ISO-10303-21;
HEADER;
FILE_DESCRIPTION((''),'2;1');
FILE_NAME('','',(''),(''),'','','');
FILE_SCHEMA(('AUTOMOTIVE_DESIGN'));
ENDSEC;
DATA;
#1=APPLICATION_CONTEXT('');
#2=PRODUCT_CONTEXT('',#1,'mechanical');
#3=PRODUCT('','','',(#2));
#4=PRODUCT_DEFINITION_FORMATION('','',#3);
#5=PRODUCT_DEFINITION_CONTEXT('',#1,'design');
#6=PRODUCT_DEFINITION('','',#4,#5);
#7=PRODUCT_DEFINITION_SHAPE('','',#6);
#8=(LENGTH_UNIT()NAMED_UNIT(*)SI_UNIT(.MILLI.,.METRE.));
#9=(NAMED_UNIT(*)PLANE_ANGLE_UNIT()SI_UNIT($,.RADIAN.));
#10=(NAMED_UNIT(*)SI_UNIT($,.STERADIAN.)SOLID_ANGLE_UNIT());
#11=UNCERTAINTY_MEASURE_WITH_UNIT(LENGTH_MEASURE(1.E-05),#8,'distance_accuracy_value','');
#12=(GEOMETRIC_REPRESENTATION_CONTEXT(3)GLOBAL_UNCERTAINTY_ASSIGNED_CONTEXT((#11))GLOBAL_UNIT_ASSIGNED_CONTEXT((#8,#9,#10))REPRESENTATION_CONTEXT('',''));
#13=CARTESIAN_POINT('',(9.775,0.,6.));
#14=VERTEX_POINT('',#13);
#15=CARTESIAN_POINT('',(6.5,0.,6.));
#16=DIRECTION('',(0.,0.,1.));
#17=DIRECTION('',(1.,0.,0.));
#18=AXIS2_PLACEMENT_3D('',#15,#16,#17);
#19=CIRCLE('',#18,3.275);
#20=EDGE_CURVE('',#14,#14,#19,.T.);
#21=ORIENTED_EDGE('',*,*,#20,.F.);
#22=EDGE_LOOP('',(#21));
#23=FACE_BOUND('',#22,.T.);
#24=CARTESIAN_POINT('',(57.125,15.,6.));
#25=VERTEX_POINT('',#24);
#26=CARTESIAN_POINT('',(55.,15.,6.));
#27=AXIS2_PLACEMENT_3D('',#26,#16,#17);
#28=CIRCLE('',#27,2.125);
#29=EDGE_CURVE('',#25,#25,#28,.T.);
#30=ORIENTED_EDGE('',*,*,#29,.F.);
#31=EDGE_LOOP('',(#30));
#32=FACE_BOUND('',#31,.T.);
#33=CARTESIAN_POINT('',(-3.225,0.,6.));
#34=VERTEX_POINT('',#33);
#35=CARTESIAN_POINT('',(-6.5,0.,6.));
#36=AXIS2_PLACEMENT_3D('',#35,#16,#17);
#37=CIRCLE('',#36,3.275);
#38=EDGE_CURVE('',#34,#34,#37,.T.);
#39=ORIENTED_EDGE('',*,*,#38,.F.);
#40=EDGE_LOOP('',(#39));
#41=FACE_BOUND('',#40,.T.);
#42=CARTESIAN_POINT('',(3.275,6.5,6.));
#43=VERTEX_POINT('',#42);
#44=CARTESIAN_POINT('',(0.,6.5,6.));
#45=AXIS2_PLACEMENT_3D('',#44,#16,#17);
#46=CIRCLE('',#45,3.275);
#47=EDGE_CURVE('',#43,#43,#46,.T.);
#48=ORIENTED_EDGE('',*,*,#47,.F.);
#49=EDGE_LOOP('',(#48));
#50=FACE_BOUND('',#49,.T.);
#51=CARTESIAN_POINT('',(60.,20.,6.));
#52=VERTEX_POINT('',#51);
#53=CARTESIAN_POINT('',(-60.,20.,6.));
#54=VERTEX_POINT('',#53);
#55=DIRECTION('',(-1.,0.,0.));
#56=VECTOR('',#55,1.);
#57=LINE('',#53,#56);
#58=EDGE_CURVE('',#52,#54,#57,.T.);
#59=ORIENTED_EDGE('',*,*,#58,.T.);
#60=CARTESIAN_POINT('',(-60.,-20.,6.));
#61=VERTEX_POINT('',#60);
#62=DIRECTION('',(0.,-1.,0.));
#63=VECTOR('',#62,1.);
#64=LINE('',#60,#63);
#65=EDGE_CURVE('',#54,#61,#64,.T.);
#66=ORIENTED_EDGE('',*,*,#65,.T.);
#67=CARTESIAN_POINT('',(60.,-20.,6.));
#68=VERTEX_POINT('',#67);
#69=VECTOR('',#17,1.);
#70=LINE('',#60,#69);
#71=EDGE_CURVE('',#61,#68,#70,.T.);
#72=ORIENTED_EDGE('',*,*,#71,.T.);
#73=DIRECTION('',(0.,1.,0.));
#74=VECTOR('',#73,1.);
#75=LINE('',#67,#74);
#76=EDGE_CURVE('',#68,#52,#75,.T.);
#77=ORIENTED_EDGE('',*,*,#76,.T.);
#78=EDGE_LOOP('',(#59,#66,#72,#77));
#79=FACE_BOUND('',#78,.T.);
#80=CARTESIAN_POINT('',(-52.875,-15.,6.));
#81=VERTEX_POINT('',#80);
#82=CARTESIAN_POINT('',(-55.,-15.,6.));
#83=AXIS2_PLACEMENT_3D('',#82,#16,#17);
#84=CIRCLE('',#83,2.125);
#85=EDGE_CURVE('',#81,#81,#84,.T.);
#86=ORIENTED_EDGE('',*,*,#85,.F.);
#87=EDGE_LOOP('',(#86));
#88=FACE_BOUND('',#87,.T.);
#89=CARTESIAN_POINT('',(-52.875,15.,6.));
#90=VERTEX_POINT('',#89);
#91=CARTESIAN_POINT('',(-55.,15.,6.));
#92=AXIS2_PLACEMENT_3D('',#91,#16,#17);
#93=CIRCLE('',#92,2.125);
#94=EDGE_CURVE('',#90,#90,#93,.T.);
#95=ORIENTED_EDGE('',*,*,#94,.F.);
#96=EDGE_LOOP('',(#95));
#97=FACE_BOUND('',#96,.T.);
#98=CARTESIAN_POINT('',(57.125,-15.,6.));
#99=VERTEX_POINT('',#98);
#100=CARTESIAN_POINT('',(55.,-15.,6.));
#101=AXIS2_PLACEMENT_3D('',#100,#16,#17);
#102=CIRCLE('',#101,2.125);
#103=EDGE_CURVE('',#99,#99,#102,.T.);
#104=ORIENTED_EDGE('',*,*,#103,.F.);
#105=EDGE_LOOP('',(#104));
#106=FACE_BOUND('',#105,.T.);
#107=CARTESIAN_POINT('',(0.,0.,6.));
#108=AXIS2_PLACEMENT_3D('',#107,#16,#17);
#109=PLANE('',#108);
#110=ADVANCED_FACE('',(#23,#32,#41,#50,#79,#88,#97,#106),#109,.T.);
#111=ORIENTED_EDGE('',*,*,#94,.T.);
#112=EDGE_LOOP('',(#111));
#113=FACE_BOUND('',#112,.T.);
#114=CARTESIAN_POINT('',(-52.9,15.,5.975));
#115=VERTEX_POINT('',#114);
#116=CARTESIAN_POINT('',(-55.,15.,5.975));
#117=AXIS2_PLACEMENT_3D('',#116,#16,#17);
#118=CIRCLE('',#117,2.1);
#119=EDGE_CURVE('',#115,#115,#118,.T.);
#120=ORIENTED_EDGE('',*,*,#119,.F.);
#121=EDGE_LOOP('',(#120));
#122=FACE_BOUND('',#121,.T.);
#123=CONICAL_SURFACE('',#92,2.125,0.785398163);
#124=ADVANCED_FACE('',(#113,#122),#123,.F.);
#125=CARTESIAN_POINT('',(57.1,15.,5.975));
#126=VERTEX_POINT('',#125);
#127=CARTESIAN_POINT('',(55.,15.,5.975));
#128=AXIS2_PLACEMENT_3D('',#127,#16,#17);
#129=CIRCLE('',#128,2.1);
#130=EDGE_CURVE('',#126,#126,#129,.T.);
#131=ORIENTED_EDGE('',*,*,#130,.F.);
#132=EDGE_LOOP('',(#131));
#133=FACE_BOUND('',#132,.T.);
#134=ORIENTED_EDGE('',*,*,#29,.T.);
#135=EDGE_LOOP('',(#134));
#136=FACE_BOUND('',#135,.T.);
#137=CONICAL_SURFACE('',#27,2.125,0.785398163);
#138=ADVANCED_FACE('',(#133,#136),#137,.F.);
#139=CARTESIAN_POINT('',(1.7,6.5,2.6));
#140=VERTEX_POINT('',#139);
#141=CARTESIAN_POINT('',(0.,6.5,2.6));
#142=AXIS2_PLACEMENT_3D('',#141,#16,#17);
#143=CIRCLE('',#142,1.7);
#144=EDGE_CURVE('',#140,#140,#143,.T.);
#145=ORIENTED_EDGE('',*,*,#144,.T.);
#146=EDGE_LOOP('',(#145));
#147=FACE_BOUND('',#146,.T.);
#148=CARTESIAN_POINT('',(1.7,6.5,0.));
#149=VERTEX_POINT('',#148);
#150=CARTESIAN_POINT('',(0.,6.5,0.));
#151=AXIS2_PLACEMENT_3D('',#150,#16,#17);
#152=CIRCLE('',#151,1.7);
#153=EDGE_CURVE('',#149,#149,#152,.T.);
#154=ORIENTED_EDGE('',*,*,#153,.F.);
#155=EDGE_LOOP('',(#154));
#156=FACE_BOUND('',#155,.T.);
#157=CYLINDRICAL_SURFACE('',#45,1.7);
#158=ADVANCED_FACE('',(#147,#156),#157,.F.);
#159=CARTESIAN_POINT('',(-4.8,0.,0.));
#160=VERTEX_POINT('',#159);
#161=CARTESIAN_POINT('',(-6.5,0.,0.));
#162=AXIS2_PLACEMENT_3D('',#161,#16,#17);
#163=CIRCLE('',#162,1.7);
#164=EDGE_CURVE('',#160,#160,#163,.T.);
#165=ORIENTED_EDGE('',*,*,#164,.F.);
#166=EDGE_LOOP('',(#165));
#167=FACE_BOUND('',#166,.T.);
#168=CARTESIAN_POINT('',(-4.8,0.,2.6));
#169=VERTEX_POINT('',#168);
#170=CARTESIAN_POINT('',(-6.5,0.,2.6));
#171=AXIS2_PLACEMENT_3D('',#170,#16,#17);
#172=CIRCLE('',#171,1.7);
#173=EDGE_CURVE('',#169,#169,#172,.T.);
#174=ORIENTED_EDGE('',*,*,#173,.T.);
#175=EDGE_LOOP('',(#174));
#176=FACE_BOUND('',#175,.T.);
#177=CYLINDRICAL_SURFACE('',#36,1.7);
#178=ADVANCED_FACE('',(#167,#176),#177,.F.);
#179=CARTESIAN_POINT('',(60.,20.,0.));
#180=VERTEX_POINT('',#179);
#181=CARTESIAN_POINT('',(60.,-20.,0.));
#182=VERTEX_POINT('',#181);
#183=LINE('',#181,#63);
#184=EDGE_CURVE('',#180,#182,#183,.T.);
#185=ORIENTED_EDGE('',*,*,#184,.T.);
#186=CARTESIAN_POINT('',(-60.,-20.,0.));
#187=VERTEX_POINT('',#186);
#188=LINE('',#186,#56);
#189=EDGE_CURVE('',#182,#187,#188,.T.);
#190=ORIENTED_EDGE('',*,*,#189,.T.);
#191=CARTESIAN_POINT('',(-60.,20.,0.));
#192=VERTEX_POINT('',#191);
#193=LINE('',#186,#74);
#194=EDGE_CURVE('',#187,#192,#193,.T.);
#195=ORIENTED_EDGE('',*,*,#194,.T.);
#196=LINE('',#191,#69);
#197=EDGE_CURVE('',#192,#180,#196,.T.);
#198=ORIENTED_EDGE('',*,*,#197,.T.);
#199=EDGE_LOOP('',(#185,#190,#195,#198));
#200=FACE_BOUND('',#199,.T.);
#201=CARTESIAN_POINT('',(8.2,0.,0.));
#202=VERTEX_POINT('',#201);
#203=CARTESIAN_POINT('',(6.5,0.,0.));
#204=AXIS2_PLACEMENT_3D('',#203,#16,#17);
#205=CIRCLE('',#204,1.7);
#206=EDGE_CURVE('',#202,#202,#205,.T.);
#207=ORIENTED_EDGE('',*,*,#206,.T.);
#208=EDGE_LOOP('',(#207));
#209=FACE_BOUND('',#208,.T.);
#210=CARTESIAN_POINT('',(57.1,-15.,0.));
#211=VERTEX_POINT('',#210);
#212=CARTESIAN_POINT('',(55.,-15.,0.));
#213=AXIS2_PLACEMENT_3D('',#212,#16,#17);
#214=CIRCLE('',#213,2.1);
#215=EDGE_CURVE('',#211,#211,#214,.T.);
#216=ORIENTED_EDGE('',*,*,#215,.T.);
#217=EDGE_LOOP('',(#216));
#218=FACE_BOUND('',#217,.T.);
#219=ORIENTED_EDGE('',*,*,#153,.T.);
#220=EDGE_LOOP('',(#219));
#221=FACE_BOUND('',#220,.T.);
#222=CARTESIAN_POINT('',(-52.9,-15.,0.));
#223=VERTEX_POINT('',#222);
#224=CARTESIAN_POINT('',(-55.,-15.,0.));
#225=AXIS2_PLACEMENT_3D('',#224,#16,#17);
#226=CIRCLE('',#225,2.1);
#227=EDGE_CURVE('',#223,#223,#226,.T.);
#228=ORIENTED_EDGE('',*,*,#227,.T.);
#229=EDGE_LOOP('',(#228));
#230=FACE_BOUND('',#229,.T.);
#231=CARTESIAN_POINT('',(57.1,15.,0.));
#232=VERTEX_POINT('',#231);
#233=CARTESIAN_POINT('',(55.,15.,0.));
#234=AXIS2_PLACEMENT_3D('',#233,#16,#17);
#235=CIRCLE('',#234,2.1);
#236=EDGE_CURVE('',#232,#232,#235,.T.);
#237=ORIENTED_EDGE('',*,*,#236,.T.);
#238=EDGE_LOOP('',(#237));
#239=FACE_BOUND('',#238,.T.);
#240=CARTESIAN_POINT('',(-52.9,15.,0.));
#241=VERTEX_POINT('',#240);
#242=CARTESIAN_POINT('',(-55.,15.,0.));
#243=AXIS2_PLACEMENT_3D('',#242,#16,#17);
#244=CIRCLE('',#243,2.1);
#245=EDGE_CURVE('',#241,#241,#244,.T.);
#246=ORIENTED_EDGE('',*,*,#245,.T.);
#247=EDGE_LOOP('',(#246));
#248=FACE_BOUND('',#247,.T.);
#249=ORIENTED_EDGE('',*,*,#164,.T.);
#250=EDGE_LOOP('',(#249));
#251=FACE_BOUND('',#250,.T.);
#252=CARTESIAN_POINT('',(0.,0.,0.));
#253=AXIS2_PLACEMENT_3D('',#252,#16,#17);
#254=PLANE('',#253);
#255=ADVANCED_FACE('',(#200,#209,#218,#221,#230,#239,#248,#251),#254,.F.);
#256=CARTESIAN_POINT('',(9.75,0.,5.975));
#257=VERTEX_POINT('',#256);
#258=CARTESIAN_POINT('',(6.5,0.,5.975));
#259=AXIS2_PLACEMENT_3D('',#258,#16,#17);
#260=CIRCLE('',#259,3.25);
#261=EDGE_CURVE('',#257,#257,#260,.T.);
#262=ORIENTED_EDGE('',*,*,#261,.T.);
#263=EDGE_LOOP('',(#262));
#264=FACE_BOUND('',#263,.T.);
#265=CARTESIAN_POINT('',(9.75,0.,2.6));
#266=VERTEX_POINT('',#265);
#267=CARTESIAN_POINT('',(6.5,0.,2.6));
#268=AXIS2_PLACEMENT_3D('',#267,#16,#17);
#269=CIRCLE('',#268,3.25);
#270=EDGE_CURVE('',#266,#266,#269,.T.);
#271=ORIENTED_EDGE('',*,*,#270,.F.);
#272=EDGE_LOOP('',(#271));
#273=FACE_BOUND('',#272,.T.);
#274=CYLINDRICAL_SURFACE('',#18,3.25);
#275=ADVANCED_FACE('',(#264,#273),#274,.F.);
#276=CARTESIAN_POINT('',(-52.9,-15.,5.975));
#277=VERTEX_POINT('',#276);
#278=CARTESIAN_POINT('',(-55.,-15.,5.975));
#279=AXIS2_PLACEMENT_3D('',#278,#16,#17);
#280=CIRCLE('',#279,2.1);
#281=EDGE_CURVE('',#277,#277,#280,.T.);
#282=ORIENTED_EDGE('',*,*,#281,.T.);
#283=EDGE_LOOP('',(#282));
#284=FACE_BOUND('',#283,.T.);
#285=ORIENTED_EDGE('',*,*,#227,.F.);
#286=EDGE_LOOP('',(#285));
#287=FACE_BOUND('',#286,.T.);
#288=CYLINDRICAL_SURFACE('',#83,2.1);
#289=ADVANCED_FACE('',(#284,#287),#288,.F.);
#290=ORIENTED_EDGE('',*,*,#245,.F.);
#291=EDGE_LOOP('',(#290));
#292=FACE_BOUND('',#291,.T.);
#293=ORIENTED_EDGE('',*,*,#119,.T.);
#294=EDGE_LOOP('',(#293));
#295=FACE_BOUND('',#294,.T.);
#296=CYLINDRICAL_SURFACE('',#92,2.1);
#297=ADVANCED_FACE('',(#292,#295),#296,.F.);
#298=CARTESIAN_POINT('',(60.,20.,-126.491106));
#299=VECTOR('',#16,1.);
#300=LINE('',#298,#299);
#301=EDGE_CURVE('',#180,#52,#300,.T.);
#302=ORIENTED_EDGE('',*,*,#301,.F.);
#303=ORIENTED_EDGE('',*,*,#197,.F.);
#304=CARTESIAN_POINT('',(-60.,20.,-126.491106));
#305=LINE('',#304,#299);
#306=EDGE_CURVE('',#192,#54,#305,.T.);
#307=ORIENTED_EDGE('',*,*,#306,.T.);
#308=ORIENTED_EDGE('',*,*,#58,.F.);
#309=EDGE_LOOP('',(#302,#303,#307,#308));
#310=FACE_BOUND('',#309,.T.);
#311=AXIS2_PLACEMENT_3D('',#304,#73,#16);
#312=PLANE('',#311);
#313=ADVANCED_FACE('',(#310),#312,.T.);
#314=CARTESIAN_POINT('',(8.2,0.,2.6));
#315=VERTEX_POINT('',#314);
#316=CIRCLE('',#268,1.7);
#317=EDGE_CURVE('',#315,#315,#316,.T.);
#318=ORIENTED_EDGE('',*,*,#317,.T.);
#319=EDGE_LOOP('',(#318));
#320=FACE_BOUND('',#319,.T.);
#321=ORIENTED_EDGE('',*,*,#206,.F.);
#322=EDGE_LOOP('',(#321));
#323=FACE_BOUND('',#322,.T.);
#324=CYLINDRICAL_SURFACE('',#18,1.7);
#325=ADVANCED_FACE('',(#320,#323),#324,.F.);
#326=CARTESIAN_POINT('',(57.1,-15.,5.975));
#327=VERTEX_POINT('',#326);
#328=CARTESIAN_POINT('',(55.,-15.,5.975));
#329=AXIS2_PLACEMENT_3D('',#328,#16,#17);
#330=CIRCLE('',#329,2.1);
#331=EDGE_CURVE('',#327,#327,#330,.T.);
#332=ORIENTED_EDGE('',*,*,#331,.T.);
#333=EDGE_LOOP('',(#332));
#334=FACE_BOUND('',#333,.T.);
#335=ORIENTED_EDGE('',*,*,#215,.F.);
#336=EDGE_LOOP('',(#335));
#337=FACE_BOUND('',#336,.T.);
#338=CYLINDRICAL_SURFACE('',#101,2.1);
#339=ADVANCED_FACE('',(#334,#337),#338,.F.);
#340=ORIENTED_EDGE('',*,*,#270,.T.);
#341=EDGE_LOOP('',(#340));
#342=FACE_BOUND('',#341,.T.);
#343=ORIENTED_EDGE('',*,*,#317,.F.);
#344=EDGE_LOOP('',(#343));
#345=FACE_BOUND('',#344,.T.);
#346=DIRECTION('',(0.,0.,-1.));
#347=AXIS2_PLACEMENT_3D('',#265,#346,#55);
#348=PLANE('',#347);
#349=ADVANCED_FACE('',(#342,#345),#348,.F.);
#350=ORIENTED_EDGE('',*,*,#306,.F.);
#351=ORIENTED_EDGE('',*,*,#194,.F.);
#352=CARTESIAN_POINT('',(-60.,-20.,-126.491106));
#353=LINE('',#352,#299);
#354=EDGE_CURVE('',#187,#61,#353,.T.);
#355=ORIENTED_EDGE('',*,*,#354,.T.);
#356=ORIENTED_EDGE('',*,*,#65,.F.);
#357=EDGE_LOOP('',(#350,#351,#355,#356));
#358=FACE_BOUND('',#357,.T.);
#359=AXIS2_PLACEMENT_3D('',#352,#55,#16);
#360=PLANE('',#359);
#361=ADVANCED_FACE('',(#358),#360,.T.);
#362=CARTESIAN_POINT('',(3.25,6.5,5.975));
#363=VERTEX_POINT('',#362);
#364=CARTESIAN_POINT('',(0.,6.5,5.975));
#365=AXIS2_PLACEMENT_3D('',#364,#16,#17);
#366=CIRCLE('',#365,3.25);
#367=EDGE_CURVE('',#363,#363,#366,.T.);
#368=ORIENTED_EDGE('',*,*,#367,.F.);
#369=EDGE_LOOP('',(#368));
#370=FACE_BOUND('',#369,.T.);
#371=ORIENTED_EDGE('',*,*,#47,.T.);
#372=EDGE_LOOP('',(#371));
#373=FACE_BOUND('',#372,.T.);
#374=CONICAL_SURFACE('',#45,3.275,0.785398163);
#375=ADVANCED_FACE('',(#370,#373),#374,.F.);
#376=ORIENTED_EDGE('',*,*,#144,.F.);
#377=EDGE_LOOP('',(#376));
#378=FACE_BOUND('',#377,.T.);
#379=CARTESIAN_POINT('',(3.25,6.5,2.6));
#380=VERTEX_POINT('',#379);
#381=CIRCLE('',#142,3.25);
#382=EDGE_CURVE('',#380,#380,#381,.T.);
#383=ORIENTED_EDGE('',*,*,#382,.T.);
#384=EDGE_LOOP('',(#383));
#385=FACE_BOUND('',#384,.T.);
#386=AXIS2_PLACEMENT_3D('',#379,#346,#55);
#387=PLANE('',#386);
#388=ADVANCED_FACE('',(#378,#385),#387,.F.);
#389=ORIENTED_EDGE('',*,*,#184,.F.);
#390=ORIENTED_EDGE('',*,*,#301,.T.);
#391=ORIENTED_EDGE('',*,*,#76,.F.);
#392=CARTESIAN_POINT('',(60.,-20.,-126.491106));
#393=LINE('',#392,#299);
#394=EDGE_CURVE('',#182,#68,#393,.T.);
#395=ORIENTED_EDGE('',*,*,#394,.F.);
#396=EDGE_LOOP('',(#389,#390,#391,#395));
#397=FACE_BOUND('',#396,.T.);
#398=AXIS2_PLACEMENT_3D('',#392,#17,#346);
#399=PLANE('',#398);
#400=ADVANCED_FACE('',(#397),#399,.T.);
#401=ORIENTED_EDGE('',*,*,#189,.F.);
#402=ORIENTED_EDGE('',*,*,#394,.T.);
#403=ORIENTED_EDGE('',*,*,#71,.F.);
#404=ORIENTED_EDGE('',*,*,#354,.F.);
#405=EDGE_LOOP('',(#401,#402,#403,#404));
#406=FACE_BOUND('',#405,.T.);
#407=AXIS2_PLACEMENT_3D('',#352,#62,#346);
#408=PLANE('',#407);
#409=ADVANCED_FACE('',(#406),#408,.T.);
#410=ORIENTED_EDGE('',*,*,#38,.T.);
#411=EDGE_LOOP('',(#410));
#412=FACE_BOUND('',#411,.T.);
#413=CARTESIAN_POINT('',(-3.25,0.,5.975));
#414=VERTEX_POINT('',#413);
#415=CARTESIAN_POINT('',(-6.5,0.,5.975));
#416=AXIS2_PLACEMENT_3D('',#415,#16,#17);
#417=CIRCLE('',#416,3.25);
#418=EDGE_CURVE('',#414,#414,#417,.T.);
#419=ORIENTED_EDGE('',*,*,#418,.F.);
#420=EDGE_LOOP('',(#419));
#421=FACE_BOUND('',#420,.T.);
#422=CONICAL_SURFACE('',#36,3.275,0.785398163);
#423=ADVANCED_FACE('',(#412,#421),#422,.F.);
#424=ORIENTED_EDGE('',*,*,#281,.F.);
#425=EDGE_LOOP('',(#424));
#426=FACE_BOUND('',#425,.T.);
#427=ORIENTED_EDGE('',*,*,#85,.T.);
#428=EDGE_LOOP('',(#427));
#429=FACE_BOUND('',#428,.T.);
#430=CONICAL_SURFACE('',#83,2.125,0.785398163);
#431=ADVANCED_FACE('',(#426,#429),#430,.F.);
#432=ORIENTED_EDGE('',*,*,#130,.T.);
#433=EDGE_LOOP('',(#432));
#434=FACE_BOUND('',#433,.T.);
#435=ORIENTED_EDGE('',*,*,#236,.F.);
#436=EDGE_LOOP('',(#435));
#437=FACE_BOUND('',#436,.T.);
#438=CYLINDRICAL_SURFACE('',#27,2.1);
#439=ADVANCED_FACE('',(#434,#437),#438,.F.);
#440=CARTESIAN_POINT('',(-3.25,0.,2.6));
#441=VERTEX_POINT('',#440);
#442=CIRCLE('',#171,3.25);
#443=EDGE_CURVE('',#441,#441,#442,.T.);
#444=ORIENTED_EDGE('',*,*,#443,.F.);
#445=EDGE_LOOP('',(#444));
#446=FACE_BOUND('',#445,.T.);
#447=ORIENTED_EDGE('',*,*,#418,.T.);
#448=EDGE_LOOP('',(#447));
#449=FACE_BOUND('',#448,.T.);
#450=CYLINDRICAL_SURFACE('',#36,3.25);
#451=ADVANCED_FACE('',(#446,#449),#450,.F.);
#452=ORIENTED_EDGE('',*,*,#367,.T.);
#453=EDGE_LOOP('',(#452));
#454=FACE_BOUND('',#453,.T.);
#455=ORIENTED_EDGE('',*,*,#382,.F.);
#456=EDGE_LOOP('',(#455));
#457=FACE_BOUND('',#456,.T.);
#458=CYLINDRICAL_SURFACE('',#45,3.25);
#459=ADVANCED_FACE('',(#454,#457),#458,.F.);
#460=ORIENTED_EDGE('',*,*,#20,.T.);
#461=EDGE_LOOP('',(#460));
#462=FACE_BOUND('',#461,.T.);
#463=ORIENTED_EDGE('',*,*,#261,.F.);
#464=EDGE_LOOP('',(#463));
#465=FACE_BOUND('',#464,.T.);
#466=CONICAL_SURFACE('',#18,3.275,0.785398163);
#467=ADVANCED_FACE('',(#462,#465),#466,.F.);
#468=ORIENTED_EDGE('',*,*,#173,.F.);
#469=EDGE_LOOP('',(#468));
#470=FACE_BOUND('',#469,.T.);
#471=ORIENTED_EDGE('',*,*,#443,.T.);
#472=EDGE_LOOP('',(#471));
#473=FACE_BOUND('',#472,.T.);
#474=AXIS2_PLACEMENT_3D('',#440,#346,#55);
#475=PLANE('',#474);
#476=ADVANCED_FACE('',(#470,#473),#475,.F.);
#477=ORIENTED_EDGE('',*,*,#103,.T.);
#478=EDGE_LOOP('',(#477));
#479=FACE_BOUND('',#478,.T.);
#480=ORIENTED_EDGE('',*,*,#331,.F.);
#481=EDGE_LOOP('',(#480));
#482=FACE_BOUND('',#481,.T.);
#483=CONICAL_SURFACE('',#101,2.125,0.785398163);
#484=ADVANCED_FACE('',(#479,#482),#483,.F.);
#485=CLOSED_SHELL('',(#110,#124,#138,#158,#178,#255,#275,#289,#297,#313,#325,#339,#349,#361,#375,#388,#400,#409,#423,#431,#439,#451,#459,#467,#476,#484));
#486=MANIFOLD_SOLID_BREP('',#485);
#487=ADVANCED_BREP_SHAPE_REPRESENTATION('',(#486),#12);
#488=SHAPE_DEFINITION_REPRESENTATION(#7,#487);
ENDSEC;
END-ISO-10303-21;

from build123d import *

# Parameters (mm, degrees)
SKETCH1_R                                    = 10
BOSS_EXTRUDE1_DEPTH                          = 6
CBORE_FOR_M3_HEX_SOCKET_HEAD_CAP_SCR_2_COUNT = 2
CBORE_FOR_M3_HEX_SOCKET_HEAD_CAP_SCR_2_PITCH = 9.192388155
CBORE_FOR_M3_HEX_SOCKET_HEAD_CAP_SCR_3_COUNT = 2
CBORE_FOR_M3_HEX_SOCKET_HEAD_CAP_SCR_3_PITCH = 13
BOSS_EXTRUDE2_START                          = -6
SKETCH6_W                                    = 120
SKETCH6_H                                    = 40
SKETCH6_R                                    = 10
BOSS_EXTRUDE2_DEPTH                          = 6


# Read off the part's stored shape, not the designer's step: Tap Drill for M4 Helicoil1
with BuildPart() as part:
    # Sketch1 → Boss-Extrude1 (new body)
    with BuildSketch(Plane.XY):
        Circle(SKETCH1_R)
    extrude(amount=BOSS_EXTRUDE1_DEPTH)

    # Sketch5 → CBORE for M3 Hex Socket Head Cap Screw1 (revolve, cut)
    with BuildSketch(Plane(origin=(-6.5, 0, 6), x_dir=(0, -1, 0), z_dir=(1, 0, 0))):
        Polygon((0, 0), (0, 6), (1.7, 6), (1.7, 3.4), (3.25, 3.4), (3.25, 0.025), (3.275, 0), align=None)
    cbore_for_m3_hex_socket_head_cap_screw1 = revolve(axis=Axis((-6.5, 0, 12.35), (0, 0, -1)), mode=Mode.SUBTRACT)

    # CBORE for M3 Hex Socket Head Cap Scr 2: CBORE for M3 Hex Socket Head Cap Screw1 ×2
    with Locations(*[Vector(0.7071067811865476, 0.7071067811865476, 0) * (i * CBORE_FOR_M3_HEX_SOCKET_HEAD_CAP_SCR_2_PITCH) for i in range(1, CBORE_FOR_M3_HEX_SOCKET_HEAD_CAP_SCR_2_COUNT)]):
        add(cbore_for_m3_hex_socket_head_cap_screw1, mode=Mode.SUBTRACT)

    # CBORE for M3 Hex Socket Head Cap Scr 3: CBORE for M3 Hex Socket Head Cap Screw1 ×2
    with Locations(*[(i * CBORE_FOR_M3_HEX_SOCKET_HEAD_CAP_SCR_3_PITCH, 0, 0) for i in range(1, CBORE_FOR_M3_HEX_SOCKET_HEAD_CAP_SCR_3_COUNT)]):
        add(cbore_for_m3_hex_socket_head_cap_screw1, mode=Mode.SUBTRACT)

    # Sketch6 → Boss-Extrude2 (add)
    with BuildSketch(Plane.XY.offset(6).offset(BOSS_EXTRUDE2_START)):
        Rectangle(SKETCH6_W, SKETCH6_H)
        Circle(SKETCH6_R, mode=Mode.SUBTRACT)
    extrude(amount=BOSS_EXTRUDE2_DEPTH)

    # Tap Drill for M4 Helicoil1 outline → Tap Drill for M4 Helicoil1 (revolve, cut)
    with BuildSketch(Plane(origin=(55, -15, 0), x_dir=(1, 0, 0), z_dir=(0, -1, 0))):
        Polygon((0, 0), (2.1, 0), (2.1, 5.975), (2.125, 6), (0, 6), align=None)
    revolve(axis=Axis((55, -15, 0), (0, 0, 1)), mode=Mode.SUBTRACT)

    # Tap Drill for M4 Helicoil1 2 outline → Tap Drill for M4 Helicoil1 2 (revolve, cut)
    with BuildSketch(Plane(origin=(-55, -15, 0), x_dir=(1, 0, 0), z_dir=(0, -1, 0))):
        Polygon((0, 0), (2.1, 0), (2.1, 5.975), (2.125, 6), (0, 6), align=None)
    revolve(axis=Axis((-55, -15, 0), (0, 0, 1)), mode=Mode.SUBTRACT)

    # Tap Drill for M4 Helicoil1 3 outline → Tap Drill for M4 Helicoil1 3 (revolve, cut)
    with BuildSketch(Plane(origin=(-55, 15, 0), x_dir=(1, 0, 0), z_dir=(0, -1, 0))):
        Polygon((0, 0), (2.1, 0), (2.1, 5.975), (2.125, 6), (0, 6), align=None)
    revolve(axis=Axis((-55, 15, 0), (0, 0, 1)), mode=Mode.SUBTRACT)

    # Tap Drill for M4 Helicoil1 4 outline → Tap Drill for M4 Helicoil1 4 (revolve, cut)
    with BuildSketch(Plane(origin=(55, 15, 0), x_dir=(1, 0, 0), z_dir=(0, -1, 0))):
        Polygon((0, 0), (2.1, 0), (2.1, 5.975), (2.125, 6), (0, 6), align=None)
    revolve(axis=Axis((55, 15, 0), (0, 0, 1)), mode=Mode.SUBTRACT)


solid = part.part
